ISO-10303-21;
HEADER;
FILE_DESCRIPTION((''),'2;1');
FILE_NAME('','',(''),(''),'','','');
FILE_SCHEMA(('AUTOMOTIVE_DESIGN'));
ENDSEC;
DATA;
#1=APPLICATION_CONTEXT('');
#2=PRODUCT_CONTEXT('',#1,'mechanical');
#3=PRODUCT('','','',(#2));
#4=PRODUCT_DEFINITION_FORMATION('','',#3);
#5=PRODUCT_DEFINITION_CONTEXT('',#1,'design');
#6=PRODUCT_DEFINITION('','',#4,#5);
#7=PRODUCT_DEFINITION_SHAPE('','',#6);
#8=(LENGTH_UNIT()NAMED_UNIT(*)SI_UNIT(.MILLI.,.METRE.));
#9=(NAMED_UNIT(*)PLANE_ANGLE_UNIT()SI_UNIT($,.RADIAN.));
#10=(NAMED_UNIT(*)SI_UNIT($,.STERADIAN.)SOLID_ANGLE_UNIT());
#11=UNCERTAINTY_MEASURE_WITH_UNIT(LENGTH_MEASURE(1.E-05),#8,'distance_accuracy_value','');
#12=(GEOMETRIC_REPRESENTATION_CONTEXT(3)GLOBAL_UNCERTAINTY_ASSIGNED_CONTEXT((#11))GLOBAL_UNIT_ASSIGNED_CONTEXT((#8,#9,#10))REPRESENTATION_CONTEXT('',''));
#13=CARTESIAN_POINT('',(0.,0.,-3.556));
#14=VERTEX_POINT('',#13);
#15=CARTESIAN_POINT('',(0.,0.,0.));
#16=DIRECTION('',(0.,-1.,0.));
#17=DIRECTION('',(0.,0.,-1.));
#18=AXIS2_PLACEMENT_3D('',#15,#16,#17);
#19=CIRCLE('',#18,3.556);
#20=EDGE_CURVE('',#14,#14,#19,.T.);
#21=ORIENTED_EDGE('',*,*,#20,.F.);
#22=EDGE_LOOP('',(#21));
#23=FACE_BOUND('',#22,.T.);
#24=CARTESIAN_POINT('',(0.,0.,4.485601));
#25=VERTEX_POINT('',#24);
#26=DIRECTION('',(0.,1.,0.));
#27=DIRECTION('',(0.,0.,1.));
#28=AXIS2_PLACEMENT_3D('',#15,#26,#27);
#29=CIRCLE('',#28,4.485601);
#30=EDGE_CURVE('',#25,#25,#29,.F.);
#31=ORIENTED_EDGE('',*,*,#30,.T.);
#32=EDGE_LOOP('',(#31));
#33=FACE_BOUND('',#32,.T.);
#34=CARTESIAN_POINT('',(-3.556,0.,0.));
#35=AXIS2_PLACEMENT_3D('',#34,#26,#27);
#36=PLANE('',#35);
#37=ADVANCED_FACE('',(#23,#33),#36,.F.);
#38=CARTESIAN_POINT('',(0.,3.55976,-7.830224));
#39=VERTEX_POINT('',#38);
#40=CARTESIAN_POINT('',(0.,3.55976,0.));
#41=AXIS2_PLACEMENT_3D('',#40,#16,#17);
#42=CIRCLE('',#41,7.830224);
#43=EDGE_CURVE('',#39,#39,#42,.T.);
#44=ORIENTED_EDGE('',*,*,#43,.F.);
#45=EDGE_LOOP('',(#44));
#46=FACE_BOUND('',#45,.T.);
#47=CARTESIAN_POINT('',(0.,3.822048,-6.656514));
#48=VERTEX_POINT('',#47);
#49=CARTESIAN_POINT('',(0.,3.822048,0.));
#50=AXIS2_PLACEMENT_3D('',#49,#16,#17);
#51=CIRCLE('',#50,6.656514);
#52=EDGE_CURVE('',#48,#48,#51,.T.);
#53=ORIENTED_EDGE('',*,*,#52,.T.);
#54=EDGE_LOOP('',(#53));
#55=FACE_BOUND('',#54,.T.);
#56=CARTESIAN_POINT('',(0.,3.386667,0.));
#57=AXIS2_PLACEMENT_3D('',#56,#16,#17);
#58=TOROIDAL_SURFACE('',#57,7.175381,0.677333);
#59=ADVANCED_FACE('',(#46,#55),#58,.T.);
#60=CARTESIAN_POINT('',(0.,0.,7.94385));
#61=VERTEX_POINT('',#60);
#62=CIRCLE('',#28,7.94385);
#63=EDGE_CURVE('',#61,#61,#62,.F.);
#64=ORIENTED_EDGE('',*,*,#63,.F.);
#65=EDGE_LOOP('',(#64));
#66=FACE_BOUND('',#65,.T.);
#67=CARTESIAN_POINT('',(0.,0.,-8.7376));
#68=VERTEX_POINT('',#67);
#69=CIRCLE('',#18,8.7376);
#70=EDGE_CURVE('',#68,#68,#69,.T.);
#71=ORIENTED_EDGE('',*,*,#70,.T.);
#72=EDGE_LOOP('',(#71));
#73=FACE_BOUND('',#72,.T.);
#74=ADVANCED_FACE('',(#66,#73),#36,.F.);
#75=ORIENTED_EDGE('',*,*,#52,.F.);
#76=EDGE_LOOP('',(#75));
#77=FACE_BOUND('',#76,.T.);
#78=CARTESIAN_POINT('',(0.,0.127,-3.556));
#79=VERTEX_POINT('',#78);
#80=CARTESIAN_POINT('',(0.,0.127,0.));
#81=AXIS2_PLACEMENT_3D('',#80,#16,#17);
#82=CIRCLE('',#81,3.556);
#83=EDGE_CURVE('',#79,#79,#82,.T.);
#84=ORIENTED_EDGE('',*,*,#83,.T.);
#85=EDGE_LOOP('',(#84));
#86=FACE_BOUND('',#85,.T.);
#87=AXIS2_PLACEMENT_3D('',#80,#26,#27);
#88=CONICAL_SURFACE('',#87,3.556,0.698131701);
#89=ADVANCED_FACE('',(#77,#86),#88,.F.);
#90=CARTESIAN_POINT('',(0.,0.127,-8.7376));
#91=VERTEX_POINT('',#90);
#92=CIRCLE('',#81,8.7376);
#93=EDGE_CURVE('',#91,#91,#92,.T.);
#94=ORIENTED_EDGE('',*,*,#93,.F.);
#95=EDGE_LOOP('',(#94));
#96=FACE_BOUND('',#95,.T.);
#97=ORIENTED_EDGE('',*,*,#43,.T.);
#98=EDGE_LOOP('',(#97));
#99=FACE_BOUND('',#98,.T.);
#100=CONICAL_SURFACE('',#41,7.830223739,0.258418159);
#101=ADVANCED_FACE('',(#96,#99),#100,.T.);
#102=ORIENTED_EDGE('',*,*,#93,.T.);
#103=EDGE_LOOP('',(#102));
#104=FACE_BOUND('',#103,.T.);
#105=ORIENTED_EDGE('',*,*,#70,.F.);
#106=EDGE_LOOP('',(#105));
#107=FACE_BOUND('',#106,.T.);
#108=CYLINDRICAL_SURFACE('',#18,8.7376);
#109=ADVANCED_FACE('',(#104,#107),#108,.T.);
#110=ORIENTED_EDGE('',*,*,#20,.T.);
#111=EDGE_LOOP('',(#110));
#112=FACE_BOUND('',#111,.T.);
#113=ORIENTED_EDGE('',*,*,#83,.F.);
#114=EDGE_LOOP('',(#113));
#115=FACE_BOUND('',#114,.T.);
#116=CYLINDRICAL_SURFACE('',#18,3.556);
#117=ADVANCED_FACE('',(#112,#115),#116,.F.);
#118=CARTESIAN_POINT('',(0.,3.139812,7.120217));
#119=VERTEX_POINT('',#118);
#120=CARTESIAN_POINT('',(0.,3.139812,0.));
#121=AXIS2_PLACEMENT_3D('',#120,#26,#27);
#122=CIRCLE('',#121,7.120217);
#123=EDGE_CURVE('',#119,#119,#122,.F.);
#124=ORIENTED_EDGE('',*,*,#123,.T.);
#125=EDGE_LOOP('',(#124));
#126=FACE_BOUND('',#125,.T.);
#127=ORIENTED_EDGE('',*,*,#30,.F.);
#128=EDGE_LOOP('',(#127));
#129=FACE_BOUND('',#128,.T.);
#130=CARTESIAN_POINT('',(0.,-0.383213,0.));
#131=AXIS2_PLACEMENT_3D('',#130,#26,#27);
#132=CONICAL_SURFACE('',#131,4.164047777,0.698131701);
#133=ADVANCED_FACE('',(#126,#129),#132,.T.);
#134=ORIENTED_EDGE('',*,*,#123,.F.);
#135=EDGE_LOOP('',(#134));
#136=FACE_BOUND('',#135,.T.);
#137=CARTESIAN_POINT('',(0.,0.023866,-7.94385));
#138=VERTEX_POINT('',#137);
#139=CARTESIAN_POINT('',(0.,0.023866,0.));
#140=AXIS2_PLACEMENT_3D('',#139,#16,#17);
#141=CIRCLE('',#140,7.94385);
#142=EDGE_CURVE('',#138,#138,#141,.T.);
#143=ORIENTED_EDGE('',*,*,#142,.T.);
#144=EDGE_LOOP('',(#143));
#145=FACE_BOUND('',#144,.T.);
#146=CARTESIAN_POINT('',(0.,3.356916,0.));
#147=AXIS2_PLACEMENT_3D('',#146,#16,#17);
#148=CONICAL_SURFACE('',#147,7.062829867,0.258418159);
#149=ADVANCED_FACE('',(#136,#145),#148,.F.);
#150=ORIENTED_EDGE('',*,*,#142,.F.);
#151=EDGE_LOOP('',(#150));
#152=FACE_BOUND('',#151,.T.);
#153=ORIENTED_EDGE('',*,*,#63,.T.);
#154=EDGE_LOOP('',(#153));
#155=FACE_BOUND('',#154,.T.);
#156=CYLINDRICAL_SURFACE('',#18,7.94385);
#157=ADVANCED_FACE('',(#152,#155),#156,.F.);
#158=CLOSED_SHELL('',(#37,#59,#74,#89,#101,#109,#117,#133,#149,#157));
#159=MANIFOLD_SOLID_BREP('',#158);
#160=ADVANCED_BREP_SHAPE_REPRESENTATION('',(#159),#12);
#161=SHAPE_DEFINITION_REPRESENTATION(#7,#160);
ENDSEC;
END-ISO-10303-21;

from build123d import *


# Read off the part's stored shape, not the designer's step: Shell2
with BuildPart() as part:
    # Sketch1 → Revolve1 (revolve)
    with BuildSketch(Plane.XY, mode=Mode.PRIVATE) as revolve1_sk:
        with BuildLine():
            Line((-8.7376, 0), (-8.7376, 0.127))
            Line((-8.7376, 0.127), (-7.830223739, 3.559760253))
            ThreePointArc((-7.830223739, 3.559760253), (-7.323100489, 4.047695704), (-6.656513532, 3.822048141))
            Line((-6.656513532, 3.822048141), (-3.556, 0.127))
            Line((-3.556, 0.127), (-3.556, 0))
            Line((-3.556, 0), (-8.7376, 0))
        make_face()
    revolve(revolve1_sk.sketch.rotate(Axis((0, 0, 0), (0, 1, 0)), 270), axis=Axis((0, 0, 0), (0, 1, 0)))

    # Shell2 outline → Shell2 (revolve, cut)
    with BuildSketch(Plane.XY):
        Polygon((7.120216638, 3.139812195), (4.485601383, 0), (7.94385, 0), (7.94385, 0.023865712), align=None)
    revolve(axis=Axis((0, 0, 0), (0, 1, 0)), mode=Mode.SUBTRACT)


solid = part.part
